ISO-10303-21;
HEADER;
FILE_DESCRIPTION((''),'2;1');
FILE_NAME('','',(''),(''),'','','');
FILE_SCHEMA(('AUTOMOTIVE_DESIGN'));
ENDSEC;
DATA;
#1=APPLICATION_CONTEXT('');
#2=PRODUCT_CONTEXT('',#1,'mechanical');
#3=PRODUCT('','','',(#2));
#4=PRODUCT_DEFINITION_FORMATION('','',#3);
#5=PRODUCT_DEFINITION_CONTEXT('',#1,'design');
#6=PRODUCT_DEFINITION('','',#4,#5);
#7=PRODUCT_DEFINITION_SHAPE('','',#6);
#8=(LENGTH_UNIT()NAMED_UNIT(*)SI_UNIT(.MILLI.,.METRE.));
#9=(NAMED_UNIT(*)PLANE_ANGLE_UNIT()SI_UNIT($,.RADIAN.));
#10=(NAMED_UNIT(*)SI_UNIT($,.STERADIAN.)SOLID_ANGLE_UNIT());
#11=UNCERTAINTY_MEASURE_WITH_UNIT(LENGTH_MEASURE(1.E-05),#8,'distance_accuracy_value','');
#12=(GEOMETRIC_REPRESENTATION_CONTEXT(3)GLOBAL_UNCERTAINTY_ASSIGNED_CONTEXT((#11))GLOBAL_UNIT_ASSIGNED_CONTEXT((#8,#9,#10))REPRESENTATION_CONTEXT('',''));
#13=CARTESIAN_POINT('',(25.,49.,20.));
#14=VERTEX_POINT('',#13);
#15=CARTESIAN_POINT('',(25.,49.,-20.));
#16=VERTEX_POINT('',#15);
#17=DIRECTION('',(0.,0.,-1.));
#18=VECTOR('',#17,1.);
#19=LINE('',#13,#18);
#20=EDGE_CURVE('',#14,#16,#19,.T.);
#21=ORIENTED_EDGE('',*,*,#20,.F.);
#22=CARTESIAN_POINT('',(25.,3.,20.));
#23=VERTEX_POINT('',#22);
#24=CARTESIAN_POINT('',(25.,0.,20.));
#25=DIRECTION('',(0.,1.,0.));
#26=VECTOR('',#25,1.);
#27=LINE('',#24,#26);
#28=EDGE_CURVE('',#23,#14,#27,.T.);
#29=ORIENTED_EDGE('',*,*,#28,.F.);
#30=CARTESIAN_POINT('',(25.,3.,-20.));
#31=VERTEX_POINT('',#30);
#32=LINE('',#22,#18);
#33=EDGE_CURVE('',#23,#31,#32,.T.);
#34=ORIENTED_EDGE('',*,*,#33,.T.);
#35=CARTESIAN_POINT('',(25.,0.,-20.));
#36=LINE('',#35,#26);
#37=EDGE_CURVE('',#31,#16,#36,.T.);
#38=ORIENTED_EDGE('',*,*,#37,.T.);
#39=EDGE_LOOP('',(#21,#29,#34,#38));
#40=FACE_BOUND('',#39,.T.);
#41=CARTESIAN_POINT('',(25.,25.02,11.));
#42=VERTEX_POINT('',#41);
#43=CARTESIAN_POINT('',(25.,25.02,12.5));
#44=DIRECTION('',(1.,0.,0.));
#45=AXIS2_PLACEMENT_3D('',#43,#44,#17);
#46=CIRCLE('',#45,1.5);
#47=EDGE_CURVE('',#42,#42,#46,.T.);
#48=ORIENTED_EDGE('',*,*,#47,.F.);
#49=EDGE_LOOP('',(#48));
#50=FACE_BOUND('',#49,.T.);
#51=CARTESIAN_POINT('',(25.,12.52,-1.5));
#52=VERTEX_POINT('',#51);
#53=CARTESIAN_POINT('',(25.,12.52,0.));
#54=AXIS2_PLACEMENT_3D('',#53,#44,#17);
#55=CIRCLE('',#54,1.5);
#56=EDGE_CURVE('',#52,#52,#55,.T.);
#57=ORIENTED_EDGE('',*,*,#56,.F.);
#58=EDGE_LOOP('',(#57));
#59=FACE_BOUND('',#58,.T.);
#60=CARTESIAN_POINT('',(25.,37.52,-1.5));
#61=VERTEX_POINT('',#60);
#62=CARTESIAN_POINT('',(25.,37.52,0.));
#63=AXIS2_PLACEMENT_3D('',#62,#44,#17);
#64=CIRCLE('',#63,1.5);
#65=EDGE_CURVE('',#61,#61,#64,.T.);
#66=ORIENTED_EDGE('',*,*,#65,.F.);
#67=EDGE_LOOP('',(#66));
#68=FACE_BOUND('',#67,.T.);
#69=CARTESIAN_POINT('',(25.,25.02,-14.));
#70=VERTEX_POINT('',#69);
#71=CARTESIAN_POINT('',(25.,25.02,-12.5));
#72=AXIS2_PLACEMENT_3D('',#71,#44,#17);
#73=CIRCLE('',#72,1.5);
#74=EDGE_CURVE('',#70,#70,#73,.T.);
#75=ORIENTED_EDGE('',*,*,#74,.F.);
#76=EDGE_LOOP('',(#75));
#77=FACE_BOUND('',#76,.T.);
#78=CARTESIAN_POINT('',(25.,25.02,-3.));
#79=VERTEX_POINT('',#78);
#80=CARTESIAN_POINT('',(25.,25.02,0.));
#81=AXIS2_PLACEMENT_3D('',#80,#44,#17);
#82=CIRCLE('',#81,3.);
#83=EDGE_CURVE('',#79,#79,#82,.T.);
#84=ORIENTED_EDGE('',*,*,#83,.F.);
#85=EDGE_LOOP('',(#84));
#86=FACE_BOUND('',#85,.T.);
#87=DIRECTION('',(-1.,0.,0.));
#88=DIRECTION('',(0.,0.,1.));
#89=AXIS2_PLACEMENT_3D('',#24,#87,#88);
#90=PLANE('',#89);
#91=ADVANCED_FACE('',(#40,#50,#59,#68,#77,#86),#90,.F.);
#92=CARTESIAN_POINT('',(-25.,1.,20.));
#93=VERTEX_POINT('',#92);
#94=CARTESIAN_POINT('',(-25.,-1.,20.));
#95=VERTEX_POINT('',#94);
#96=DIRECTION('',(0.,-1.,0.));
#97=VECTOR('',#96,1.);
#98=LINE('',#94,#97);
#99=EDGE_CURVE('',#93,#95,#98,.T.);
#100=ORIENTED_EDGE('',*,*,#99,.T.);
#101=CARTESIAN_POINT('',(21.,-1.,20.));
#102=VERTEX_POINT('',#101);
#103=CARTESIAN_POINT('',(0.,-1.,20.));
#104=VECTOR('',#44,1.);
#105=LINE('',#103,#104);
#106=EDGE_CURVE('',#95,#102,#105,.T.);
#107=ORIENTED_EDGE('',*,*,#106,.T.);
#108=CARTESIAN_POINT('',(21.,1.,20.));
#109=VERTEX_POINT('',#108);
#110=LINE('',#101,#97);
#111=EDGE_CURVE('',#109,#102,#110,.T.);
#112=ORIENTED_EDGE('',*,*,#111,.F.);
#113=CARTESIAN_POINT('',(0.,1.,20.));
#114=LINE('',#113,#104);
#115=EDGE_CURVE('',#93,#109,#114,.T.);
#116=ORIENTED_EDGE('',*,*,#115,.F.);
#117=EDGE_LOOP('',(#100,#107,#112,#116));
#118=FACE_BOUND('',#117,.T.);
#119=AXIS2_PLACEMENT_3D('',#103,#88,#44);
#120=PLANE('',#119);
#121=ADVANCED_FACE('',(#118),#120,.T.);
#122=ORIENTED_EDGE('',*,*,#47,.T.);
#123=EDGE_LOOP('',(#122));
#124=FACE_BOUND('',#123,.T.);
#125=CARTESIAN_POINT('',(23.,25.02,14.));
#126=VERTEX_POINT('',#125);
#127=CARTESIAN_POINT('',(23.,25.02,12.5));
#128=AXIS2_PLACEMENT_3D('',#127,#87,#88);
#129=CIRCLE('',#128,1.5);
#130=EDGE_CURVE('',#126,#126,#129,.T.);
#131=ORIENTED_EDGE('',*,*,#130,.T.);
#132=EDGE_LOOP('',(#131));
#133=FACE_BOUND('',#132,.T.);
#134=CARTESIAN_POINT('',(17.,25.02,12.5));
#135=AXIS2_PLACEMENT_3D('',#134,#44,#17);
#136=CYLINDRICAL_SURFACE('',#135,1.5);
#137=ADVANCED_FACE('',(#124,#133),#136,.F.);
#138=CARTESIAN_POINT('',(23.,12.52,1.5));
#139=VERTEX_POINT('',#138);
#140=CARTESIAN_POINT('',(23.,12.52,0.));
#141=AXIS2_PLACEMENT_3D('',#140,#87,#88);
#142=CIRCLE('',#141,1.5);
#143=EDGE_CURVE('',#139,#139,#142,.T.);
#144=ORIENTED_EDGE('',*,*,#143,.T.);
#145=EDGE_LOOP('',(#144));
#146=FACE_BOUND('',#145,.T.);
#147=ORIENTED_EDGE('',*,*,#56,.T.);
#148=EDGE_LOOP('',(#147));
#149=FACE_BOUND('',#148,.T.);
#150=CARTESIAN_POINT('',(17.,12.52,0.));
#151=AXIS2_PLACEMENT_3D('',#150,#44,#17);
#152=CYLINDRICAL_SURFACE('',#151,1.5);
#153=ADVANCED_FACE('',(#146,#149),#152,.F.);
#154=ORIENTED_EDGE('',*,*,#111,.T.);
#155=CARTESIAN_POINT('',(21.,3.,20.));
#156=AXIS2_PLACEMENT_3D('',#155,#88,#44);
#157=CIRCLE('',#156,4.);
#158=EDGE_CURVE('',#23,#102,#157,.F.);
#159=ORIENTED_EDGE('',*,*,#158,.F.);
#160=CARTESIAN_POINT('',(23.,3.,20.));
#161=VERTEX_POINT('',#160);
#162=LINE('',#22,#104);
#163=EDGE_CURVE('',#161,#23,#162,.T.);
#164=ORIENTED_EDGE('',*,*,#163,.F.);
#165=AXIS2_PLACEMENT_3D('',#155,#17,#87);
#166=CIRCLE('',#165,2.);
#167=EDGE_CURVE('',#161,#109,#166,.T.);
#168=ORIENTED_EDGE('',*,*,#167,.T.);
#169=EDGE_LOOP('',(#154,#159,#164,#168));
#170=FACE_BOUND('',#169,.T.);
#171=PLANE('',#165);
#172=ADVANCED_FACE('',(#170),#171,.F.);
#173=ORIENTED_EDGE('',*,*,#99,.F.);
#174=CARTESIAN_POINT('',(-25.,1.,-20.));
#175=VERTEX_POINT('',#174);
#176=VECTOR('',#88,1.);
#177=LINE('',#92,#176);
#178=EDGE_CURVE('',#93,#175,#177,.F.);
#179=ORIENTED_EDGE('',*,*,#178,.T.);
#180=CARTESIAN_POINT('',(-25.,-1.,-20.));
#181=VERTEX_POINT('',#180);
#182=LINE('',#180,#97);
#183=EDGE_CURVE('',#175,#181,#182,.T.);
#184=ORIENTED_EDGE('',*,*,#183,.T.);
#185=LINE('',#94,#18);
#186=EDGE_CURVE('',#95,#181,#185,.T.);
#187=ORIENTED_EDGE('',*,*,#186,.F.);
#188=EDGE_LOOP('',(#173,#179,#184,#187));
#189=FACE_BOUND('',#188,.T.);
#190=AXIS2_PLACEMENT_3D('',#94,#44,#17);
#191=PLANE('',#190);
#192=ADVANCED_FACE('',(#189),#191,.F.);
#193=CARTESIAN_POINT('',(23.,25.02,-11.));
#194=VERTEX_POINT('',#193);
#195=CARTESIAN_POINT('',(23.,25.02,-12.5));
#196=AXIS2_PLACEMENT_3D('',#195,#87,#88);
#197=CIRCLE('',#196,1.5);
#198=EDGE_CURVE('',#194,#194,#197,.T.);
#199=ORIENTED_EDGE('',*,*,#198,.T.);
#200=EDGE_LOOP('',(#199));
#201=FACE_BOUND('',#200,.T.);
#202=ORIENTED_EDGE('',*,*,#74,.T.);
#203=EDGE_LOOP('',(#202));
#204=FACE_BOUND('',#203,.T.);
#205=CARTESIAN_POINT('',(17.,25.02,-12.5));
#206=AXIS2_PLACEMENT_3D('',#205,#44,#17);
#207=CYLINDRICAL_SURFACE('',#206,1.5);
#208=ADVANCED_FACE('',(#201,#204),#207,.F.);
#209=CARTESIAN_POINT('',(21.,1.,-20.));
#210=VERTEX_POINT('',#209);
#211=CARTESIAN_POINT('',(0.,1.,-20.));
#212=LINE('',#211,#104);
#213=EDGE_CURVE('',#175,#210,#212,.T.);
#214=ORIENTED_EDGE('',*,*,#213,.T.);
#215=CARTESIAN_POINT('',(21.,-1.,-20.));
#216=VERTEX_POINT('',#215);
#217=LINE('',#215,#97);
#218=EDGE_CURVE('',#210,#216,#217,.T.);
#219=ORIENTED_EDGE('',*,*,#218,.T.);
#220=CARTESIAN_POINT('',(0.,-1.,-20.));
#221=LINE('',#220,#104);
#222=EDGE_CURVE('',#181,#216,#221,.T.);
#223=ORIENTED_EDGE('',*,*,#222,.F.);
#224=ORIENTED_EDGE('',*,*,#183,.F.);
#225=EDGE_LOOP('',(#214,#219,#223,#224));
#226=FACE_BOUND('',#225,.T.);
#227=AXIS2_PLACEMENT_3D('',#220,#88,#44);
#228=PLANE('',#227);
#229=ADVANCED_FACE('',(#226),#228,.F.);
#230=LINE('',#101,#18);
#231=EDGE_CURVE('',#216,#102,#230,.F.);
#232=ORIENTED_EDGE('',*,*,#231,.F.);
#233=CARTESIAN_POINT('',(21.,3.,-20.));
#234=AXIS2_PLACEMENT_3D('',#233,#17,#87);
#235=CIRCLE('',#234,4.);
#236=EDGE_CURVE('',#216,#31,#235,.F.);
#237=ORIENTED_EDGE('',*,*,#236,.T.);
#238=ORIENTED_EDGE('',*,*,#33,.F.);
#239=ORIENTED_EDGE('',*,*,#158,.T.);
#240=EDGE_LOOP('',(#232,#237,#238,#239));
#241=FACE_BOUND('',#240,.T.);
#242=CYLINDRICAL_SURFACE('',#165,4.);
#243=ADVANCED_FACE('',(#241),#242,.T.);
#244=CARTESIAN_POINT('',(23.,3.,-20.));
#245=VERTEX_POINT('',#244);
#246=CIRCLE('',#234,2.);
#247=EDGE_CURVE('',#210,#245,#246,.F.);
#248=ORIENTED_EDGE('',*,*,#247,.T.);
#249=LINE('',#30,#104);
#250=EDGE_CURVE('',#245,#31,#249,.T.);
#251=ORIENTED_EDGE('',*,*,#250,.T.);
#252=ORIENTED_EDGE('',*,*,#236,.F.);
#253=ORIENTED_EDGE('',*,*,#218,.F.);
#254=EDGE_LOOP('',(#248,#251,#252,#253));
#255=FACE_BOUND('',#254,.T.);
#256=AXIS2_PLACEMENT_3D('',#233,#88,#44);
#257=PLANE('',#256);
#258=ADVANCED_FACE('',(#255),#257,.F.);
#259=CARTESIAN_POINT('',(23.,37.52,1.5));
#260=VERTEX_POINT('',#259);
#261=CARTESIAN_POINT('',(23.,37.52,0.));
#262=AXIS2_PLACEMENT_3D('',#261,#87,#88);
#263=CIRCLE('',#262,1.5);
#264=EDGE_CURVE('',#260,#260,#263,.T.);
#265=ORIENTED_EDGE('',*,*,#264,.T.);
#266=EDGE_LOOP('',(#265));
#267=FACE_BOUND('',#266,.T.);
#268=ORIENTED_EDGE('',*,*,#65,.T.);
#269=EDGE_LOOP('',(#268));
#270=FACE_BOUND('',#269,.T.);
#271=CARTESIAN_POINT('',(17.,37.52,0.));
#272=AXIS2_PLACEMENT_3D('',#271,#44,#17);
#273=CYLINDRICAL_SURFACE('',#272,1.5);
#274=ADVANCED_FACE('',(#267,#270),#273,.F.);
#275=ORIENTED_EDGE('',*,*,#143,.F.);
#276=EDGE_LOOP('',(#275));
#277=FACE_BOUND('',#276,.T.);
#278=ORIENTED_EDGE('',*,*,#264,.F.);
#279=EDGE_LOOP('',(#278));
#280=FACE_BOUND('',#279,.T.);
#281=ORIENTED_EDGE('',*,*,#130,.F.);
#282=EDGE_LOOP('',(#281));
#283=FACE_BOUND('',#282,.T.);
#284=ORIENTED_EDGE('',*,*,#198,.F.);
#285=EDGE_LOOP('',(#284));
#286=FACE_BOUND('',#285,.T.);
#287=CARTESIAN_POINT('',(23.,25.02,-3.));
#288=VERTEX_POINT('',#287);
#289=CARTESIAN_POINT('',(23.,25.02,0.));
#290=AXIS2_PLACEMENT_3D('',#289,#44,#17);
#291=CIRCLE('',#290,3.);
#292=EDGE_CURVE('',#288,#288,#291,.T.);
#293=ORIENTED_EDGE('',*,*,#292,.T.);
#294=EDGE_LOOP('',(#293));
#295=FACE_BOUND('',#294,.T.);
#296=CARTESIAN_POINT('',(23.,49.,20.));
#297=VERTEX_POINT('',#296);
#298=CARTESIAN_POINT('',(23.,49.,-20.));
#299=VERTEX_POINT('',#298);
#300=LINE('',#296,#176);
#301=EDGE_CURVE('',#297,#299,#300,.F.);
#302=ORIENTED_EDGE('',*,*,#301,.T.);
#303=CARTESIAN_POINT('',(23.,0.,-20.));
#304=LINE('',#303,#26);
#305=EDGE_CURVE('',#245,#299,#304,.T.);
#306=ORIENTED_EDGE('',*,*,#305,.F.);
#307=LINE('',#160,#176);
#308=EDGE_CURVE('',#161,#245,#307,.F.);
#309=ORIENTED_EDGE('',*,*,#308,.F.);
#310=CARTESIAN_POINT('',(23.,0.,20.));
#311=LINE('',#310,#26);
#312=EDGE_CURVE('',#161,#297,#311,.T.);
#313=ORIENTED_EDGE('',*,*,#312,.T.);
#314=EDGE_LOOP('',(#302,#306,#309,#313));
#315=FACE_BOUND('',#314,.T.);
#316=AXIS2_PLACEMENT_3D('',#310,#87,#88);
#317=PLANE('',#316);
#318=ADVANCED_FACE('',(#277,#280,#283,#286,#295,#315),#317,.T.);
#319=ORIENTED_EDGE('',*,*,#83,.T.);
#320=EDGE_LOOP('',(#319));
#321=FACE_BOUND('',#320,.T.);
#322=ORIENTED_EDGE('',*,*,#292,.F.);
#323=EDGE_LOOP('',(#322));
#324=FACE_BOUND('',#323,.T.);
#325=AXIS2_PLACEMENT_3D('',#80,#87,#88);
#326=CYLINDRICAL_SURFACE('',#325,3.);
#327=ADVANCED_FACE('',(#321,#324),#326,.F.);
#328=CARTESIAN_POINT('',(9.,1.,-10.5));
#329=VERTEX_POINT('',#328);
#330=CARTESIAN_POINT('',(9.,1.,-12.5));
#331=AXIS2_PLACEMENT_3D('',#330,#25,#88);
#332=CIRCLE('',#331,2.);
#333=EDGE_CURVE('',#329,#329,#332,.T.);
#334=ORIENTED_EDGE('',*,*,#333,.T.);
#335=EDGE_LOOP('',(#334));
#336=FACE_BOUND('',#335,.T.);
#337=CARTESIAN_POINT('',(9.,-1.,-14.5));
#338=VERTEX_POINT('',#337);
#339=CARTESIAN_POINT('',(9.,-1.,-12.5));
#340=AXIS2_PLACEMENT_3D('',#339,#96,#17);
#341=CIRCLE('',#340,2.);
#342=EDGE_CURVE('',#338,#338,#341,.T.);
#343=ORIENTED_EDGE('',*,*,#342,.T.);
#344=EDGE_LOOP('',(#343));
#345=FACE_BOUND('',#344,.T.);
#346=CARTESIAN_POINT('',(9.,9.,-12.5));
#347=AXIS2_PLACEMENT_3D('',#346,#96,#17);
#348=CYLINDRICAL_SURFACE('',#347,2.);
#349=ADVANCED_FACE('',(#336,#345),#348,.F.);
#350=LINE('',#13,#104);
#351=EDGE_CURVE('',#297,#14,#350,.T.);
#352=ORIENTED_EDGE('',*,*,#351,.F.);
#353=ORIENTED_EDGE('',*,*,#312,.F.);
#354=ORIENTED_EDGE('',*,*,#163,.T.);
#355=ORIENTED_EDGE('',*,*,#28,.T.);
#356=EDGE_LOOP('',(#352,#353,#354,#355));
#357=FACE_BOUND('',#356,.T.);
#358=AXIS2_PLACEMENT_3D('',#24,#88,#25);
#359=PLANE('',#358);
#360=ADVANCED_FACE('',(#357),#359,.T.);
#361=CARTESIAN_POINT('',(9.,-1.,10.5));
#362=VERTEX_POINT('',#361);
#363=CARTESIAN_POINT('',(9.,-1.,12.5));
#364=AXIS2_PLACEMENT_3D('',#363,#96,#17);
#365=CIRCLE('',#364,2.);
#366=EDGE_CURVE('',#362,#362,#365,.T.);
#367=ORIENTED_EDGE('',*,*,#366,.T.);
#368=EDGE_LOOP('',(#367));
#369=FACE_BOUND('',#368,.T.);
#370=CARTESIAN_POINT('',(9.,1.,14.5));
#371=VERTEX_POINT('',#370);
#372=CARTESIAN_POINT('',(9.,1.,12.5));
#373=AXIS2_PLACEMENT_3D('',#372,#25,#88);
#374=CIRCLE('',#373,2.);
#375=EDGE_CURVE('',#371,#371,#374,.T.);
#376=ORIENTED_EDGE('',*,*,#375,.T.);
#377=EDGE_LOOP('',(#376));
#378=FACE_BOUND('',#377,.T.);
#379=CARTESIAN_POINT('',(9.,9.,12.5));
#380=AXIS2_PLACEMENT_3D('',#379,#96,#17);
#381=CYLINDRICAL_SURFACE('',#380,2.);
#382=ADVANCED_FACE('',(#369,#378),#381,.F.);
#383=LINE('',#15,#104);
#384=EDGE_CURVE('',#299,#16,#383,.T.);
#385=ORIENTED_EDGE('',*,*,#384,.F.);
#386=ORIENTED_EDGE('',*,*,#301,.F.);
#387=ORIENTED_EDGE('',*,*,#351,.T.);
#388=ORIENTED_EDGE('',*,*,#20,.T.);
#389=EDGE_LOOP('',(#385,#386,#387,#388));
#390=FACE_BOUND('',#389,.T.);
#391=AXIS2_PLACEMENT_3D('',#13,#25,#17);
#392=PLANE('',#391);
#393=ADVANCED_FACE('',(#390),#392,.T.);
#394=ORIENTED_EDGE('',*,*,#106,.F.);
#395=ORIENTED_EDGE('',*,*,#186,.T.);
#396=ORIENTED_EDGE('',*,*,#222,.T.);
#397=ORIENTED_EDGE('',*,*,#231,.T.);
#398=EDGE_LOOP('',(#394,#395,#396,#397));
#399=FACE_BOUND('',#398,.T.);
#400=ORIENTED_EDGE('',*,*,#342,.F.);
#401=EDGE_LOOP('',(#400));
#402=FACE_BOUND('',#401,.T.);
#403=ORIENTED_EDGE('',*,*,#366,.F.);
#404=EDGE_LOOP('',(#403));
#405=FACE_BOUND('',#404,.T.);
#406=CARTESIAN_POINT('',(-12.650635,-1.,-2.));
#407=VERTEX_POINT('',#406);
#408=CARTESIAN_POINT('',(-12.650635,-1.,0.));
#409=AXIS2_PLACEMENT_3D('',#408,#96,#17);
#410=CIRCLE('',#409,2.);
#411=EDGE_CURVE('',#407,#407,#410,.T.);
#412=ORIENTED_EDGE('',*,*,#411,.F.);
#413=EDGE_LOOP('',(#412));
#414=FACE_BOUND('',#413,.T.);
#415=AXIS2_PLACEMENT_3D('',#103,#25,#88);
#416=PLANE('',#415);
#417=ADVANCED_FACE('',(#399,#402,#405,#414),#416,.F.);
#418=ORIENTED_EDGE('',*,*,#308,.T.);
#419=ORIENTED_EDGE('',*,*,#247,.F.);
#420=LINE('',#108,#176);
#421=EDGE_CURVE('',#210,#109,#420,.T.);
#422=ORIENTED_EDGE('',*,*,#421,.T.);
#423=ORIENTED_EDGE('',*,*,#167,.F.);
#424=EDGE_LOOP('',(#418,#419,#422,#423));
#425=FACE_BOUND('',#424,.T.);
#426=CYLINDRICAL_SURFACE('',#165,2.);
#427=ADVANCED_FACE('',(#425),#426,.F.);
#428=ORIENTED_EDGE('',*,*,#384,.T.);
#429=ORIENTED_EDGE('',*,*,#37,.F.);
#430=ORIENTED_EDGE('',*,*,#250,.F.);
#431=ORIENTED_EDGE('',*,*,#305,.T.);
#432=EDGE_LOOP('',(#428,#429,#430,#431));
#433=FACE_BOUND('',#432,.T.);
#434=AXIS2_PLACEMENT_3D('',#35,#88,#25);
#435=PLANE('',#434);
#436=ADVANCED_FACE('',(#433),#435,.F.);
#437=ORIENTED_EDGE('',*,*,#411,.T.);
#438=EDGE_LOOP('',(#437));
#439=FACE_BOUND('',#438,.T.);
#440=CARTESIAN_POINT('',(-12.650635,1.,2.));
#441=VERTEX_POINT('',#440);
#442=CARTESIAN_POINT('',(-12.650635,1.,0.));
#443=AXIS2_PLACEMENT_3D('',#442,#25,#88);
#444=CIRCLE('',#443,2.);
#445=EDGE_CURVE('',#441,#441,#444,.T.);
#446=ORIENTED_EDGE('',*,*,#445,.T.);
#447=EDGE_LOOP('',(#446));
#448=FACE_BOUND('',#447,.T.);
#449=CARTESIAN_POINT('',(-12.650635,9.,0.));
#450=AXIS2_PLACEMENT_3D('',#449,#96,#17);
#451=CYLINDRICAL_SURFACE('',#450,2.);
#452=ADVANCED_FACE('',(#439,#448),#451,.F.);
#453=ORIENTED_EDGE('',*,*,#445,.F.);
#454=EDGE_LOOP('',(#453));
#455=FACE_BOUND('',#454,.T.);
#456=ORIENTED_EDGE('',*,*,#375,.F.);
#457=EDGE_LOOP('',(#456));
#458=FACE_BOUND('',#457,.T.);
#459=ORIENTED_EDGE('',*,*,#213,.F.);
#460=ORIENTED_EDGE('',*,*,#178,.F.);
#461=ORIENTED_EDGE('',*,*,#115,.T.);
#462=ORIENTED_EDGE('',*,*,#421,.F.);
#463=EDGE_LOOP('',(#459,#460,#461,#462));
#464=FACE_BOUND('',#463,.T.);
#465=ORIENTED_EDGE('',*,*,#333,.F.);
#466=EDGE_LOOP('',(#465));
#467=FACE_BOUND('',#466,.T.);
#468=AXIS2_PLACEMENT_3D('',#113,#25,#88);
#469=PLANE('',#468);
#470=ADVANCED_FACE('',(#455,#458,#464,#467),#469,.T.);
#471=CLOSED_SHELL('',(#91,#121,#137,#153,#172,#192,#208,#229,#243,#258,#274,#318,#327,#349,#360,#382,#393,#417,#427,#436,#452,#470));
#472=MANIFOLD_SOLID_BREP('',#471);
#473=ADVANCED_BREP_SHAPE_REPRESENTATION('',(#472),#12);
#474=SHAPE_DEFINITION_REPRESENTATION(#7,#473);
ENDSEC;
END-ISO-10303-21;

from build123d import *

# Parameters (mm, degrees)
RESSALTO_EXTRUS_O1_DEPTH  = 20
ESBO_O2_R                 = 3
CORTE_EXTRUS_O1_DEPTH     = 50
CONVERTER_S_LIDO1_START   = -21
CONVERTER_S_LIDO1_DEPTH   = 41
CONVERTER_S_LIDO1_START_2 = -20
CONVERTER_S_LIDO1_2_DEPTH = 40
ESBO_O3_R                 = 2
CORTE_EXTRUS_O2_DEPTH     = 10
ESBO_O4_R                 = 1.5
CORTE_EXTRUS_O3_DEPTH     = 8


with BuildPart() as part:
    # Esboço1 → Ressalto-extrusão1 (new, symmetric)
    with BuildSketch(Plane.XY):
        Polygon((23, 49), (23, 1), (-25, 1), (-25, -1), (23, -1), (25, -1), (25, 1), (25, 49), align=None)
    extrude(amount=RESSALTO_EXTRUS_O1_DEPTH, both=True)

    # Esboço2 → Corte-extrusão1 (cut)
    with BuildSketch(Plane(origin=(25, 0, 0), x_dir=(0, 0, -1), z_dir=(1, 0, 0))):
        with Locations((0, 25.02)):
            Circle(ESBO_O2_R)
    extrude(amount=-CORTE_EXTRUS_O1_DEPTH, mode=Mode.SUBTRACT)

    # Converter-Sólido1: read off the stored shape, not the designer's step
    # Converter-Sólido1 outline → Converter-Sólido1 (cut)
    with BuildSketch(Plane.XY.offset(CONVERTER_S_LIDO1_START)):
        with BuildLine():
            Line((25, -1), (25, 3))
            ThreePointArc((25, 3), (23.828427125, 0.171572875), (21, -1))
            Line((21, -1), (25, -1))
        make_face()
    extrude(amount=CONVERTER_S_LIDO1_DEPTH, mode=Mode.SUBTRACT)

    # Converter-S_lido1 2 outline → Converter-S_lido1 2 (add)
    with BuildSketch(Plane.XY.offset(CONVERTER_S_LIDO1_START_2)):
        with BuildLine():
            Line((23, 1), (23, 3))
            ThreePointArc((23, 3), (22.414213562, 1.585786438), (21, 1))
            Line((21, 1), (23, 1))
        make_face()
    extrude(amount=CONVERTER_S_LIDO1_2_DEPTH)

    # Esboço3 → Corte-extrusão2 (cut)
    with BuildSketch(Plane.XZ.offset(1)):
        with Locations(Location((9, 12.5, 0), (0, 0, 270))):
            Circle(ESBO_O3_R)
        with Locations(Location((9, -12.5, 0), (0, 0, 270))):
            Circle(ESBO_O3_R)
        with Locations(Location((-12.650635095, 0, 0), (0, 0, 270))):
            Circle(ESBO_O3_R)
    extrude(amount=-CORTE_EXTRUS_O2_DEPTH, mode=Mode.SUBTRACT)

    # Esboço4 → Corte-extrusão3 (cut)
    with BuildSketch(Plane(origin=(25, 0, 0), x_dir=(0, 0, -1), z_dir=(1, 0, 0))):
        with Locations((0, 37.52)):
            Circle(ESBO_O4_R)
        with Locations((12.5, 25.02)):
            Circle(ESBO_O4_R)
        with Locations((0, 12.52)):
            Circle(ESBO_O4_R)
        with Locations((-12.5, 25.02)):
            Circle(ESBO_O4_R)
    extrude(amount=-CORTE_EXTRUS_O3_DEPTH, mode=Mode.SUBTRACT)


solid = part.part
